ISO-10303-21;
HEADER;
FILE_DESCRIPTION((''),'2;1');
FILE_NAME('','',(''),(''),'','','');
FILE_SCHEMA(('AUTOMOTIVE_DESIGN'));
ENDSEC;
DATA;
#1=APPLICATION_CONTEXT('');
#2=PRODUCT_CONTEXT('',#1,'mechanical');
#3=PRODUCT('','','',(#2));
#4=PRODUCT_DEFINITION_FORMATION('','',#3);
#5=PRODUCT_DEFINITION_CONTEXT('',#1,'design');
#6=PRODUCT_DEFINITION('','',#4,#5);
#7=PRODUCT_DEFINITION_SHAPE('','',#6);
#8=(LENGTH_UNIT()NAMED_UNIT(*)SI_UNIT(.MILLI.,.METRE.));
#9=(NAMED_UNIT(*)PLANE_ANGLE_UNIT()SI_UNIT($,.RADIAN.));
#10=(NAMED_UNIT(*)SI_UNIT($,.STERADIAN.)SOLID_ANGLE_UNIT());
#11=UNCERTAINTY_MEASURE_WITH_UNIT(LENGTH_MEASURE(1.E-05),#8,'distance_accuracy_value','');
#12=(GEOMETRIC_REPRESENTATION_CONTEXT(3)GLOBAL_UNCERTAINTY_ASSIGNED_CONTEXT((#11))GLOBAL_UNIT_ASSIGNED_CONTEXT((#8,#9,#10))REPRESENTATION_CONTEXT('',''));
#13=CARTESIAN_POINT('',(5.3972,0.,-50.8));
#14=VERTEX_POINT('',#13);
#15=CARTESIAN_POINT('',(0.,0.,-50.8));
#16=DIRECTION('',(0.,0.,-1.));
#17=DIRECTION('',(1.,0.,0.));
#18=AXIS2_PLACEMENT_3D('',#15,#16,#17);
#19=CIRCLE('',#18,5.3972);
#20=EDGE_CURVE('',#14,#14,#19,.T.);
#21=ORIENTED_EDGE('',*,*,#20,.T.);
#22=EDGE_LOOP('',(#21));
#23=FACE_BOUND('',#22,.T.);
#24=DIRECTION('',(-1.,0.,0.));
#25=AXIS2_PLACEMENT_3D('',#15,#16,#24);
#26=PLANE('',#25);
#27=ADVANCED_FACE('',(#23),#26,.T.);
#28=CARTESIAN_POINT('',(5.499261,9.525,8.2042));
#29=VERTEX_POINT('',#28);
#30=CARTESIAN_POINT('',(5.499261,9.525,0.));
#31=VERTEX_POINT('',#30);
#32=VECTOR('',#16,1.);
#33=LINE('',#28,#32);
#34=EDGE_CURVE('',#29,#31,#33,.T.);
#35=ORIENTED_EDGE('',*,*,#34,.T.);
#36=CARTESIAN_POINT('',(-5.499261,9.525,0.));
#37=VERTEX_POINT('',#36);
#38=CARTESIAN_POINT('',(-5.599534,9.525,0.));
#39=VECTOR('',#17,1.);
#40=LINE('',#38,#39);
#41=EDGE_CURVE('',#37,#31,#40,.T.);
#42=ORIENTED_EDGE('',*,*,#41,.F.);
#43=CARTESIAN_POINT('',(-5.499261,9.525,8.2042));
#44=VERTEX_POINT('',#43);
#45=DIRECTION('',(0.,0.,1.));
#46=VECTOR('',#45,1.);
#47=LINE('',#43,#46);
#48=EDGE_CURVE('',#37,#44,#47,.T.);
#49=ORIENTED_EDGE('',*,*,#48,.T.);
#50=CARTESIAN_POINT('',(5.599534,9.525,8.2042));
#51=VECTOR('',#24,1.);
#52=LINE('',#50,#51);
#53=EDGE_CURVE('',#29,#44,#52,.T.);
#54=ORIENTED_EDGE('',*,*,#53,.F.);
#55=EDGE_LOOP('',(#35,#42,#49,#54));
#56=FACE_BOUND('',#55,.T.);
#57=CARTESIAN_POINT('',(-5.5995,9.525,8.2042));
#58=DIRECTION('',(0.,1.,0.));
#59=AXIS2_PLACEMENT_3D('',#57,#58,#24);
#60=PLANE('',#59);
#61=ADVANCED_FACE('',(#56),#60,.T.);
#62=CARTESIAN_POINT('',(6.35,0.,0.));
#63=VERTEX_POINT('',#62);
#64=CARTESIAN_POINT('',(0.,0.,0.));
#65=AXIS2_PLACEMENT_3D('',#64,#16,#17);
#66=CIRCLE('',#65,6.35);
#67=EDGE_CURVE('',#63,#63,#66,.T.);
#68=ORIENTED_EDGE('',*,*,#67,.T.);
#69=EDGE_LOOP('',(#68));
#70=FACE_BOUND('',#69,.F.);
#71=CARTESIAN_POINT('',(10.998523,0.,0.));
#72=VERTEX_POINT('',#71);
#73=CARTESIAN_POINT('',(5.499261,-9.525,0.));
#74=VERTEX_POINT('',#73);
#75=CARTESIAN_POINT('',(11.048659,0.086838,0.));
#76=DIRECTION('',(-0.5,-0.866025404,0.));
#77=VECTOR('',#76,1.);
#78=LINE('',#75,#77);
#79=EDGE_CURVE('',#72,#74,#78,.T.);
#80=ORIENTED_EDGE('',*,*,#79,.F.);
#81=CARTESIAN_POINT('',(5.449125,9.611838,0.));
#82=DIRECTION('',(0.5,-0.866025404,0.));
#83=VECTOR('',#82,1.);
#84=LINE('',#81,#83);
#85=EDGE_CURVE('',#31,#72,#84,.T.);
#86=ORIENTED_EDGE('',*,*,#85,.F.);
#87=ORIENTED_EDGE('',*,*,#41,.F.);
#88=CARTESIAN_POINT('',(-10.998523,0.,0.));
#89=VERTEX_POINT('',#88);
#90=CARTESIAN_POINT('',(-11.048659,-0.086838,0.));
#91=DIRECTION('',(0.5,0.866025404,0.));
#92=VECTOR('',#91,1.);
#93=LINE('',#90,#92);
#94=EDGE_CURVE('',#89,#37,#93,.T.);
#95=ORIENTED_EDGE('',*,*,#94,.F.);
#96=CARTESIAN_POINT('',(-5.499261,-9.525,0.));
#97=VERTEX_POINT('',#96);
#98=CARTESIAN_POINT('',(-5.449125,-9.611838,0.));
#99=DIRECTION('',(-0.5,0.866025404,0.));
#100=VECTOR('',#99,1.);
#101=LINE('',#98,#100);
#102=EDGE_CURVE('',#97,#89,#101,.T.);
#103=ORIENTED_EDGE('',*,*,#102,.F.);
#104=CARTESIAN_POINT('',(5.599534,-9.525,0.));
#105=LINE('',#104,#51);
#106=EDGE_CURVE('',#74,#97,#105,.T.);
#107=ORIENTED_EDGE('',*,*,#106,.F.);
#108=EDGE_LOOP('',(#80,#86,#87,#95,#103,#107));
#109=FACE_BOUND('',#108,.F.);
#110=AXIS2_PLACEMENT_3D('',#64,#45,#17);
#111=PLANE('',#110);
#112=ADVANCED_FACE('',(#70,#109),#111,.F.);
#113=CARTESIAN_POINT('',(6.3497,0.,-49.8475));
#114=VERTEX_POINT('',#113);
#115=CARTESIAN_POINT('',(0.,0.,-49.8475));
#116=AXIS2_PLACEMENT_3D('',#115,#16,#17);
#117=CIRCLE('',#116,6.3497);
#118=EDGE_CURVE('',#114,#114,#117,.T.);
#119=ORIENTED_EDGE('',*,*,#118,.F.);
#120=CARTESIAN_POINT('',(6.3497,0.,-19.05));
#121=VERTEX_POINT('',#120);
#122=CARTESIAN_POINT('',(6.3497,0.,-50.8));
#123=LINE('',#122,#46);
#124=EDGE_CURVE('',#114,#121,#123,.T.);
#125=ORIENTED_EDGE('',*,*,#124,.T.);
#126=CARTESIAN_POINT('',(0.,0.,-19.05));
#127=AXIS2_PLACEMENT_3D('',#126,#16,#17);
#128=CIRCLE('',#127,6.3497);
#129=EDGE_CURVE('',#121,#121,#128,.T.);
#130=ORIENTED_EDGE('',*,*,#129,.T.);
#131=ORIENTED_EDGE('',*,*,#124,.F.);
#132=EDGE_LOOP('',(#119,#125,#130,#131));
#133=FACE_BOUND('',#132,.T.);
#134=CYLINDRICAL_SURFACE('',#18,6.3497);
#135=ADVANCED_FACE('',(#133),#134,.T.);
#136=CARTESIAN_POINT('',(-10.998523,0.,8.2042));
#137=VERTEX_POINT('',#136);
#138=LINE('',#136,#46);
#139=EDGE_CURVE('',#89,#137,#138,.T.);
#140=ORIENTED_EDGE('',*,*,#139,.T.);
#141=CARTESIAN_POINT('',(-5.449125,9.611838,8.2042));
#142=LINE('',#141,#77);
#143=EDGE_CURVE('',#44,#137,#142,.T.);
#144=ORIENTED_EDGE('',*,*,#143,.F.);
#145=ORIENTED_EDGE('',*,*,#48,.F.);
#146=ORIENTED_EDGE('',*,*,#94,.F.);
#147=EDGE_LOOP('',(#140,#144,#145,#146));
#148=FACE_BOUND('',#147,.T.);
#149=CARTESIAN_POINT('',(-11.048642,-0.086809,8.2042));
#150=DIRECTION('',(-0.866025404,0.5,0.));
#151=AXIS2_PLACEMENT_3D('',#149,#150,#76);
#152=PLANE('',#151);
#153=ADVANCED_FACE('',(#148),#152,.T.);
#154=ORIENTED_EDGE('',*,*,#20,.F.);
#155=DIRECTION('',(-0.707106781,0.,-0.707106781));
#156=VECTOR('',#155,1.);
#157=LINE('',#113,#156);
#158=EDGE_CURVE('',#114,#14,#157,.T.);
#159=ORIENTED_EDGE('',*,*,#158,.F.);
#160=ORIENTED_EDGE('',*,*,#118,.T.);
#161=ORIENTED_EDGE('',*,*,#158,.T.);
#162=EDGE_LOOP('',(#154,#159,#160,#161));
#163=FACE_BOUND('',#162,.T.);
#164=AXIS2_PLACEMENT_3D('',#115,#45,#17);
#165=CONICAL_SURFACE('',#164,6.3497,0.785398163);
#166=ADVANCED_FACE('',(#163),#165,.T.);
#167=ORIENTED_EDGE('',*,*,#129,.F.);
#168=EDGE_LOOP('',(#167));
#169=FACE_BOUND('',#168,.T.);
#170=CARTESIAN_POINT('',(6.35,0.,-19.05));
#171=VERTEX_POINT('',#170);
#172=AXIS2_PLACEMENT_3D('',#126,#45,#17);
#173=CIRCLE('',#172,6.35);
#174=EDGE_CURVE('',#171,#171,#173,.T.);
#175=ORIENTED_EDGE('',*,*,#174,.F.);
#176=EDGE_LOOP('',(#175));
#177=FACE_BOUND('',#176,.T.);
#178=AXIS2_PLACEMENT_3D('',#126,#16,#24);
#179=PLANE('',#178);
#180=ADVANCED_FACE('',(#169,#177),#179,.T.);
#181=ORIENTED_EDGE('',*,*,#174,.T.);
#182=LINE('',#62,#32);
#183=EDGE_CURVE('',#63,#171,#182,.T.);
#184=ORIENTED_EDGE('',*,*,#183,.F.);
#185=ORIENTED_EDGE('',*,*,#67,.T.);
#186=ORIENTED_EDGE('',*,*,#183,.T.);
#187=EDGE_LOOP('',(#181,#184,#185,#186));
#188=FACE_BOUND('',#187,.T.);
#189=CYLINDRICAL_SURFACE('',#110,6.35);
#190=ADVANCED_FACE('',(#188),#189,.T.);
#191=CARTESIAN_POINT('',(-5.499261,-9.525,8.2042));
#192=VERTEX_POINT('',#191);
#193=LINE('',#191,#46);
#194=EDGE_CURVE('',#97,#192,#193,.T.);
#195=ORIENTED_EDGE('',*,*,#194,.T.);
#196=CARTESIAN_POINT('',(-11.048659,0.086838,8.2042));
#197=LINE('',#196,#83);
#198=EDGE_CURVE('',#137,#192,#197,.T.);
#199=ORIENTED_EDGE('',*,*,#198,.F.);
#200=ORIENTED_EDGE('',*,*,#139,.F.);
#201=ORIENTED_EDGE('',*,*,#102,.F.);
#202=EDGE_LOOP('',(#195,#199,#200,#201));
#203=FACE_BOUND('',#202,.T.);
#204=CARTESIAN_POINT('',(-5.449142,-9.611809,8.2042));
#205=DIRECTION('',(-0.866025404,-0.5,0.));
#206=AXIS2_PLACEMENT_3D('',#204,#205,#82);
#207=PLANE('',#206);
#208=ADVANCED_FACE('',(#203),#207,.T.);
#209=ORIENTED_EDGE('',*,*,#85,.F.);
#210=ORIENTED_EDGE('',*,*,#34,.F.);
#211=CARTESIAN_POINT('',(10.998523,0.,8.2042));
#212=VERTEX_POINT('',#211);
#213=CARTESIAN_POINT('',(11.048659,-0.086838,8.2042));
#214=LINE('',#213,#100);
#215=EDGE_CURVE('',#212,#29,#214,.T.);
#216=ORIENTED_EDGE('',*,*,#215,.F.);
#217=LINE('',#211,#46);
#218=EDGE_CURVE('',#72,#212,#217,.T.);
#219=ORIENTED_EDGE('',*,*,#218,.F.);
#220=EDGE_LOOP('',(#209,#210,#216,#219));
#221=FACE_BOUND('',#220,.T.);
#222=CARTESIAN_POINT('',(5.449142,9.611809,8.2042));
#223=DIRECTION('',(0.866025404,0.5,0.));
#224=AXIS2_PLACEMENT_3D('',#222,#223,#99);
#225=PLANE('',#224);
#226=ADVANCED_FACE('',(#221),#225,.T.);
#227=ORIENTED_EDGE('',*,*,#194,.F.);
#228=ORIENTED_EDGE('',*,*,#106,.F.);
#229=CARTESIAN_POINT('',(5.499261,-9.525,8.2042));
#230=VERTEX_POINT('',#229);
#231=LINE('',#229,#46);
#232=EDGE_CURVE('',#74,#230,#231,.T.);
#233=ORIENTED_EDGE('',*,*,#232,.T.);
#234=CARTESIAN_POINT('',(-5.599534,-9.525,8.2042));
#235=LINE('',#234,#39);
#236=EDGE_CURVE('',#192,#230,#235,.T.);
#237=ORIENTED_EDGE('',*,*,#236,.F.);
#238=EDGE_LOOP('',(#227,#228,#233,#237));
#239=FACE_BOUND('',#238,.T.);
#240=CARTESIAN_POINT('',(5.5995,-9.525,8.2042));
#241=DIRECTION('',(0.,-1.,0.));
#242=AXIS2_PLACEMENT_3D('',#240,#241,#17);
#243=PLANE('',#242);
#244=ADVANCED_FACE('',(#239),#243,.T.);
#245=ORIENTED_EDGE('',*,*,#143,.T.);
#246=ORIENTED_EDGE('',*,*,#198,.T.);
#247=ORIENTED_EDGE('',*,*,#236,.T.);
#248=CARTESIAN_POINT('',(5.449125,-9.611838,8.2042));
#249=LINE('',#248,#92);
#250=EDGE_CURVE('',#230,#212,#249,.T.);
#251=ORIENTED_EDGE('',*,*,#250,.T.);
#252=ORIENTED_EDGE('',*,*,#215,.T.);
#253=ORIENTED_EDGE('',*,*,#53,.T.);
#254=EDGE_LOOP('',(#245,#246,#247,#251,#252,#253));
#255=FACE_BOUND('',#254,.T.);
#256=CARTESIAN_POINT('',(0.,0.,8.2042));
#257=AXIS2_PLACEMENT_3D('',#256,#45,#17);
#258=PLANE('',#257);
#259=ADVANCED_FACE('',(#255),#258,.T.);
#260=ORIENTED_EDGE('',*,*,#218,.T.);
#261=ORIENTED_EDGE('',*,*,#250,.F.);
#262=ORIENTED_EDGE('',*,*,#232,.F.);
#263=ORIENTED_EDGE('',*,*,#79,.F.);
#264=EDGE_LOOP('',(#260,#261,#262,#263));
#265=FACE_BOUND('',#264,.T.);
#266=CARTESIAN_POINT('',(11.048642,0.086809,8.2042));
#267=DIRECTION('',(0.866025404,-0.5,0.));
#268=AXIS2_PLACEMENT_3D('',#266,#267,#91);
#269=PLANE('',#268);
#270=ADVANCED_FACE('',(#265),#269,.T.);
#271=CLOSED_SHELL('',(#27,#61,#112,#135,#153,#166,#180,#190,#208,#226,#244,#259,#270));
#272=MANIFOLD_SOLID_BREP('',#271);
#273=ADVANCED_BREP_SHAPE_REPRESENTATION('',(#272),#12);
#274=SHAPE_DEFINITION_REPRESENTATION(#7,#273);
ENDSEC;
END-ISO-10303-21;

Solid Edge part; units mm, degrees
sketch "Sketch1" plane through (0, 0, 0) normal (0, 0, 1) x (1, 0, 0)
  circle A0 centre (0, 0) radius 11.049
  dimension "D1" = 22.098
extrude "Protrusion1" add sketch "Sketch1" along normal blind 8.2042
sketch "Sketch2" plane through (0, 0, 0) normal (0, 0, -1) x (1, 0, 0)
  circle A0 centre (0, 0) radius 6.35
extrude "Protrusion2" add sketch "Sketch2" along normal blind 50.8
sketch "Sketch3" plane through (0, 0, -50.8) normal (0, 0, -1) x (1, 0, 0)
  circle A0 centre (0, 0) radius 6.3497
extrude "Cutout1" cut sketch "Sketch3" against normal blind 31.75 flip side to cut
chamfer "Chamfer_1" distance 0.9525 angle 45 1 edges at (-6.3497, 0, -50.8)
sketch "Sketch4" plane through (0, 0, 8.2042) normal (0, 0, 1) x (1, 0, 0)
  line L0 (-5.5995, 9.525) -> (5.5995, 9.525)
  dimension "D1" = 19.05
extrude "Cutout2" cut sketch "Sketch4" against normal up to next material side at (0, 9.575, 8.2042)
pattern_circular "Pattern1" count 6 over 360 about axis through (0, 0, 8.2042) along (0, 0, 1) of "Cutout2"
properties part number "24104207"
